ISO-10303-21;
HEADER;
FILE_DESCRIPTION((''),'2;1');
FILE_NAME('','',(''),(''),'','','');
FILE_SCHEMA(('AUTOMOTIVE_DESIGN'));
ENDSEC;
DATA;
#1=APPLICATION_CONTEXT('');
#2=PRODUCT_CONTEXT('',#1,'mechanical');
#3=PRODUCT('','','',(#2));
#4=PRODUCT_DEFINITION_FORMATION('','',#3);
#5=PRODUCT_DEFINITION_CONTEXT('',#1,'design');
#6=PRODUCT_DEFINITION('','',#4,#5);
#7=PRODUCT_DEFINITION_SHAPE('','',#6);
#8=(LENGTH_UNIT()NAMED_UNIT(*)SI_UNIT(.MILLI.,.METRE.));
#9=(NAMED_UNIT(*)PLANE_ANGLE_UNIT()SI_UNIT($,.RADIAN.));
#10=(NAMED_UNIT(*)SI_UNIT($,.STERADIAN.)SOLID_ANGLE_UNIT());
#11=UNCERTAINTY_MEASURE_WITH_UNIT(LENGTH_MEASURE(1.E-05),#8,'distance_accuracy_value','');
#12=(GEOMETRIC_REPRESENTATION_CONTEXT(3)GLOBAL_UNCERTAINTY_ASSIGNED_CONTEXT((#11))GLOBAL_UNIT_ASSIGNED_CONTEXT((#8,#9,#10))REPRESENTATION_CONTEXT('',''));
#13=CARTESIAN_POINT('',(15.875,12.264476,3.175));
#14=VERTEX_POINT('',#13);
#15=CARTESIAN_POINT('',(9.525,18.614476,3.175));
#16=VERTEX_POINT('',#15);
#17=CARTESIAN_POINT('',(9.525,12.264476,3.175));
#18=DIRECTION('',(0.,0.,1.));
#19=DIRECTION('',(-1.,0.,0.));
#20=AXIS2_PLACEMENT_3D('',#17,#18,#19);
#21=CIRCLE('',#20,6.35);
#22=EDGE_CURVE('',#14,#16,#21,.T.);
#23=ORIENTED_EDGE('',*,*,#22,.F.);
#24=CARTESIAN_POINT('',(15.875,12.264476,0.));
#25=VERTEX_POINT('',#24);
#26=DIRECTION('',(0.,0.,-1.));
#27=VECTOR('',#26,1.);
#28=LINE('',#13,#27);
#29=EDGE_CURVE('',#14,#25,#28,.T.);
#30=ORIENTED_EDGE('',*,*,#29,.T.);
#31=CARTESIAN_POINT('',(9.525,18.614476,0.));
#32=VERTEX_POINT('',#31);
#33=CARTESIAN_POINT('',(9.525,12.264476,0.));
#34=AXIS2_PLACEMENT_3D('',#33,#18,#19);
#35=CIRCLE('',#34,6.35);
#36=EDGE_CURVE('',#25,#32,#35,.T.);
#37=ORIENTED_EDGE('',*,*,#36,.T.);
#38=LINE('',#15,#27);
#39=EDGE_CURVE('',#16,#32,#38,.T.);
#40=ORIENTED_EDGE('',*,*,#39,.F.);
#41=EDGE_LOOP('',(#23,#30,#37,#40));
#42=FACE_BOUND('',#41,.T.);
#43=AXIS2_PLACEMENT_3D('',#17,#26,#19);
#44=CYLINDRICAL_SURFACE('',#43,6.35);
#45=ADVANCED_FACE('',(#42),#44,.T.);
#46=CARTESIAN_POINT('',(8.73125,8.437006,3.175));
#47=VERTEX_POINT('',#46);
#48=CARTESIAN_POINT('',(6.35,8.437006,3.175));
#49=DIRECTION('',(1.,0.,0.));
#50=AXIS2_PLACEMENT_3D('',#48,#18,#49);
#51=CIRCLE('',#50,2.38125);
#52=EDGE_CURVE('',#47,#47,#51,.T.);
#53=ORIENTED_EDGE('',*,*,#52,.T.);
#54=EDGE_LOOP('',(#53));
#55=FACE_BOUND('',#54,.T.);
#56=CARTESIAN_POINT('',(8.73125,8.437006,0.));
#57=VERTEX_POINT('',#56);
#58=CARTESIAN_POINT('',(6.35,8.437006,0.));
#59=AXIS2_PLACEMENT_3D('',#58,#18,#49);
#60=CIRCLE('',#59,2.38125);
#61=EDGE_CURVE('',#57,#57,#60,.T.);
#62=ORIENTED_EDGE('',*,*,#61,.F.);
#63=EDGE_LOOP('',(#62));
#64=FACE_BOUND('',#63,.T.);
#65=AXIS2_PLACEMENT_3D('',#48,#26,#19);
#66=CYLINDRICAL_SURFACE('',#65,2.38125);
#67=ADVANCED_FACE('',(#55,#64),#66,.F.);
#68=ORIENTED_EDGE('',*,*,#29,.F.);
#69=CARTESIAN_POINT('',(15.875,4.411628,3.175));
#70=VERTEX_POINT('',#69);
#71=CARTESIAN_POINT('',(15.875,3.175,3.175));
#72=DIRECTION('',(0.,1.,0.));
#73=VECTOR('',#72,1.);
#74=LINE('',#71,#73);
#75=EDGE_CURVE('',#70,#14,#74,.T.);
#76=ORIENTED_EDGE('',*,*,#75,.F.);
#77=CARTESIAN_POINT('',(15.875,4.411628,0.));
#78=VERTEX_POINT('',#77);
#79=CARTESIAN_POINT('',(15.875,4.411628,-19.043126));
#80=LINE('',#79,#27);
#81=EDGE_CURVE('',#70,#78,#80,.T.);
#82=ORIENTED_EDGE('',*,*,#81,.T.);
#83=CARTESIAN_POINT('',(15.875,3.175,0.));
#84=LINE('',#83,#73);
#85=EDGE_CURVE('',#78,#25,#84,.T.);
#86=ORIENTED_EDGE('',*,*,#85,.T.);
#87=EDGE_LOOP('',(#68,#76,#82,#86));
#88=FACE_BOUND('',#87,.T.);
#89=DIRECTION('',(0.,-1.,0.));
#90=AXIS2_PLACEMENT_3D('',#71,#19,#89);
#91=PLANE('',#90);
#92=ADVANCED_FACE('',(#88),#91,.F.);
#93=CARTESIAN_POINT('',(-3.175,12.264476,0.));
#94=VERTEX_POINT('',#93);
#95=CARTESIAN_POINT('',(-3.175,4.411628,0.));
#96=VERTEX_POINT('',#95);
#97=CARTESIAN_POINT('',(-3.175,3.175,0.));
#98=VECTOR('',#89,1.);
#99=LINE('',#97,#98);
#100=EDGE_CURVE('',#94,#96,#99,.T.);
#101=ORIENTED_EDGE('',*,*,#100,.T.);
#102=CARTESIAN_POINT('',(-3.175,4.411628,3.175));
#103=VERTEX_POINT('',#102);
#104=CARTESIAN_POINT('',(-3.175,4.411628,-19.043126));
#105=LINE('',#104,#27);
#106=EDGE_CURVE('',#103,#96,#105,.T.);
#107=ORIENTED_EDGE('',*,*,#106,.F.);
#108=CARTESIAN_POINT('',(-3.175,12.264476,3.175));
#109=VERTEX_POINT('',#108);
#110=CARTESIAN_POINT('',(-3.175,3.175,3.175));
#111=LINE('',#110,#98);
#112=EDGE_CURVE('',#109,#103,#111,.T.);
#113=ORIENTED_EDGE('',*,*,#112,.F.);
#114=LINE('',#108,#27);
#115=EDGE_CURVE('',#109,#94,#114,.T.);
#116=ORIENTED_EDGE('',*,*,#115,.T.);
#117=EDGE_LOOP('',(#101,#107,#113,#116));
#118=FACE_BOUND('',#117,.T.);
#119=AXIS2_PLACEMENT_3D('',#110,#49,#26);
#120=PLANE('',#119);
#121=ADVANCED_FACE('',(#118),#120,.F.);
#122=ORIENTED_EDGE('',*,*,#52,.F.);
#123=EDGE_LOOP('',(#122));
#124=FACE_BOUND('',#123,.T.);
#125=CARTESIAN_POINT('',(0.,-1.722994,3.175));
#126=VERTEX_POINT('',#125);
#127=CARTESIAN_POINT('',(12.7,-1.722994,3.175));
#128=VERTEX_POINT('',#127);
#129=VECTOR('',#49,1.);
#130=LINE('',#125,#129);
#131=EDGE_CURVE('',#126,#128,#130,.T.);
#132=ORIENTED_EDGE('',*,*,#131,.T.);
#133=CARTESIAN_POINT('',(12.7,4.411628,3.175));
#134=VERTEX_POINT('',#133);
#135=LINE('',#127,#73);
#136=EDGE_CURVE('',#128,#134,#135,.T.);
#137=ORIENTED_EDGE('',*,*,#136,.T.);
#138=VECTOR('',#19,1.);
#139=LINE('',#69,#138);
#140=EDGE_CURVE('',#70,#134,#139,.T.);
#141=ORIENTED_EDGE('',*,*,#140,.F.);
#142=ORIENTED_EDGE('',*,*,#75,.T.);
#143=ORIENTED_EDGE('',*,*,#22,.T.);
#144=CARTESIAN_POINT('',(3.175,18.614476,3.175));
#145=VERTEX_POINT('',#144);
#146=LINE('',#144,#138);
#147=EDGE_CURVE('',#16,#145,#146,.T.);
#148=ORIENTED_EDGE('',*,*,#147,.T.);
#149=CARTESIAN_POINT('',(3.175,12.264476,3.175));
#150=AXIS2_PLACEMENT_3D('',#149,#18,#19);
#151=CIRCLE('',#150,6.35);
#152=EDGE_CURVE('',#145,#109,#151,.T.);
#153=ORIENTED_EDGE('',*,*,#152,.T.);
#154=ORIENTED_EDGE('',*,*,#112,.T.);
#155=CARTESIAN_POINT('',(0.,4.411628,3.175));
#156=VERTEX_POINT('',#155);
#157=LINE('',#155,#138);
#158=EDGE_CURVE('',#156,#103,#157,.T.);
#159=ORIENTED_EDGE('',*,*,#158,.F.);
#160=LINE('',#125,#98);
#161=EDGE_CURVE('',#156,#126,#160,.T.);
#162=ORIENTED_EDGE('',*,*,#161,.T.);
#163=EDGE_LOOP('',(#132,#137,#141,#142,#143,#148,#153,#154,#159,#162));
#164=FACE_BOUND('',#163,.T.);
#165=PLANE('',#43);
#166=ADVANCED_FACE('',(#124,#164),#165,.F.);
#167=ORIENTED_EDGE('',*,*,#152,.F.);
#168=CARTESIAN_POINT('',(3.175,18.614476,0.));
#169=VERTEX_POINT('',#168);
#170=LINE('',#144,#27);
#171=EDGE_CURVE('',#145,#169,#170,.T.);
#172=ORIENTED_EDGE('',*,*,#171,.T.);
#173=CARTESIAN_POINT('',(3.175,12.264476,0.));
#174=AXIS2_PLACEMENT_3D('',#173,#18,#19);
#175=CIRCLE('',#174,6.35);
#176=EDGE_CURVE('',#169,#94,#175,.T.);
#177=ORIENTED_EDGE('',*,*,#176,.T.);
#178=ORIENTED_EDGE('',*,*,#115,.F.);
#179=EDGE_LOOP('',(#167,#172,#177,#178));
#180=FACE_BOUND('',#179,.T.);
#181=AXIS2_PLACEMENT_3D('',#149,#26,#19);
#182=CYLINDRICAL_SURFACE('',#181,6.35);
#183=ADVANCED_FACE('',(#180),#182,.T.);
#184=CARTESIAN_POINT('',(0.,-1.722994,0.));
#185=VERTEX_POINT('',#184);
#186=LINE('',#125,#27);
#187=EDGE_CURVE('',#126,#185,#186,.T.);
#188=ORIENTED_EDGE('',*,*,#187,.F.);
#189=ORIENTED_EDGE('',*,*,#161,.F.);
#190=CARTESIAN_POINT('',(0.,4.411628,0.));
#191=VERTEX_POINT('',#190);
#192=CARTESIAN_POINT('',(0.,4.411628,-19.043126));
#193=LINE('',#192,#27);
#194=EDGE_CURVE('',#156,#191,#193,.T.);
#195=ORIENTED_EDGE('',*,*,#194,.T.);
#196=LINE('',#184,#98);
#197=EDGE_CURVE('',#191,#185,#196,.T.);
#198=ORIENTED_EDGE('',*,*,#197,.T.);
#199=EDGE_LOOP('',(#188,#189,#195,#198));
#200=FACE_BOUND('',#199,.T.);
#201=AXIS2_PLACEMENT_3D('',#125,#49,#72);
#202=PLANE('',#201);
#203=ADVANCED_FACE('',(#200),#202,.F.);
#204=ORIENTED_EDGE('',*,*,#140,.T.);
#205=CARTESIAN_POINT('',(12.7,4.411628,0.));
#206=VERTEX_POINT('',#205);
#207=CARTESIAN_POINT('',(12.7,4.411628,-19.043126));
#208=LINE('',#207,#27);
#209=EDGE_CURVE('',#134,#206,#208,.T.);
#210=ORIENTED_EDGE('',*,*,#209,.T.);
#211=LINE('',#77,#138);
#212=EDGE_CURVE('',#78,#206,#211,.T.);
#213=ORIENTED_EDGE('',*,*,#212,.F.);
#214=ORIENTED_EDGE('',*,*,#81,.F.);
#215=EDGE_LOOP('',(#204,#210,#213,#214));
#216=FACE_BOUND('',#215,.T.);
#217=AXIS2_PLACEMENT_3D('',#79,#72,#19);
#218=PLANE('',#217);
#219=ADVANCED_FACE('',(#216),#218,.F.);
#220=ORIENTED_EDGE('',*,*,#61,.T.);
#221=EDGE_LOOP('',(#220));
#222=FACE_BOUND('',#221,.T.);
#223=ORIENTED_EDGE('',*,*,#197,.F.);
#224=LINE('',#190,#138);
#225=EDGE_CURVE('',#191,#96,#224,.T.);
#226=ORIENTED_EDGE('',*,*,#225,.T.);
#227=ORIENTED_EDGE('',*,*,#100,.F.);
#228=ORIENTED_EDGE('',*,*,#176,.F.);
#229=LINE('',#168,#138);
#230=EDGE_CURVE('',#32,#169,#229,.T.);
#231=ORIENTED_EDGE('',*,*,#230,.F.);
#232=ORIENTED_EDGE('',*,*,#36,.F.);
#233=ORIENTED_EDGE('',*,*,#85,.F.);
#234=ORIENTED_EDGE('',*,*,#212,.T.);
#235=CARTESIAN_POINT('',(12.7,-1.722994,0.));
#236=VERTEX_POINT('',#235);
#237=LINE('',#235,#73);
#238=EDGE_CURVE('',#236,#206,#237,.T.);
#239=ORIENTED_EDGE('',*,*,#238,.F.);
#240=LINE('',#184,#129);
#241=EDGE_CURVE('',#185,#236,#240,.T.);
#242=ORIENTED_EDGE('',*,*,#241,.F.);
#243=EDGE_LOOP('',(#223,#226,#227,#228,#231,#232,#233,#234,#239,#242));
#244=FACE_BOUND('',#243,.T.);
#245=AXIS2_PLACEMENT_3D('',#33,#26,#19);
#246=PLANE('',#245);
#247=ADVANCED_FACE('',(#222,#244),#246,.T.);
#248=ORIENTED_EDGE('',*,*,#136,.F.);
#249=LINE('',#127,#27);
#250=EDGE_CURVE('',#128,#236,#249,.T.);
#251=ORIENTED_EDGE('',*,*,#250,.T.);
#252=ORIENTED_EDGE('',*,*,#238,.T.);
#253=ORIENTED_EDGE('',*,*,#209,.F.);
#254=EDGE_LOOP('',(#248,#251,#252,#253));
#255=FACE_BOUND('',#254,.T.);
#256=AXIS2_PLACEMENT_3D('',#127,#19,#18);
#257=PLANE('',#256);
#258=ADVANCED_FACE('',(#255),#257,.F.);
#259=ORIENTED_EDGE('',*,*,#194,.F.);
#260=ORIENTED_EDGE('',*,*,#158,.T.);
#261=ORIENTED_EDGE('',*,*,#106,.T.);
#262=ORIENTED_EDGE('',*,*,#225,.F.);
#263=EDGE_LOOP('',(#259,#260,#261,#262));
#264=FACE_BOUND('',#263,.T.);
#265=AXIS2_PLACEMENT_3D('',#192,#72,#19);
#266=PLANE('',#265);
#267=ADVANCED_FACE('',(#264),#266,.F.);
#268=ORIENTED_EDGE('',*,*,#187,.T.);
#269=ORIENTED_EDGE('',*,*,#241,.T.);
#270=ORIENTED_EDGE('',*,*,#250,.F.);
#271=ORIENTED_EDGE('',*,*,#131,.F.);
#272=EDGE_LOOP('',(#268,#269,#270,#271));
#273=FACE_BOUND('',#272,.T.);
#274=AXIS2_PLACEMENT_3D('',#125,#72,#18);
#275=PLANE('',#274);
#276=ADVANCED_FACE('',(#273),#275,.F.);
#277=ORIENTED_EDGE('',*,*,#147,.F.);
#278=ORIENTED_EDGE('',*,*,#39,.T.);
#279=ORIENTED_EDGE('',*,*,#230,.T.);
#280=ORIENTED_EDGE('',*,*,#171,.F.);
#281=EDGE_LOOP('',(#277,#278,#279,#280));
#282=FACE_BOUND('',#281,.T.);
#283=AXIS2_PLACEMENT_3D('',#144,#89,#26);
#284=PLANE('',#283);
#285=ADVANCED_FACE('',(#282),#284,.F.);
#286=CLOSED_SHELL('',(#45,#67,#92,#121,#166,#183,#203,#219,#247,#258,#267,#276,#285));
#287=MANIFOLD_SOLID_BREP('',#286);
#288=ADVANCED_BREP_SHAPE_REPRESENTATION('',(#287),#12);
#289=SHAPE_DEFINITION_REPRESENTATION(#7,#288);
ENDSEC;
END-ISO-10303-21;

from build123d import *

# Parameters (mm, degrees)
SKETCH1_R           = 2.38125
BOSS_EXTRUDE1_DEPTH = 3.175
CAVITY1_START       = -3.175
CAVITY1_OUTLINE_W   = 1.236627981
CAVITY1_OUTLINE_H   = 3.175
CAVITY1_DEPTH       = 3.175
CAVITY1_START_2     = 12.7
CAVITY1_2_OUTLINE_W = 1.236627981
CAVITY1_2_OUTLINE_H = 3.175
CAVITY1_2_DEPTH     = 3.175


# Read off the part's stored shape, not the designer's step: Cavity1
with BuildPart() as part:
    # Sketch1 → Boss-Extrude1 (new body)
    with BuildSketch(Plane.XY):
        with BuildLine():
            Line((0, -1.722993842), (12.7, -1.722993842))
            Line((12.7, -1.722993842), (12.7, 3.175))
            Line((12.7, 3.175), (15.875, 3.175))
            Line((15.875, 3.175), (15.875, 12.264476338))
            ThreePointArc((15.875, 12.264476338), (14.015128061, 16.754604399), (9.525, 18.614476338))
            Line((9.525, 18.614476338), (3.175, 18.614476338))
            ThreePointArc((3.175, 18.614476338), (-1.315128061, 16.754604399), (-3.175, 12.264476338))
            Line((-3.175, 12.264476338), (-3.175, 3.175))
            Line((-3.175, 3.175), (0, 3.175))
            Line((0, 3.175), (0, -1.722993842))
        make_face()
        with Locations((6.35, 8.437006158)):
            Circle(SKETCH1_R, mode=Mode.SUBTRACT)
    extrude(amount=BOSS_EXTRUDE1_DEPTH)

    # Cavity1 outline → Cavity1 (cut)
    with BuildSketch(Plane.YZ.offset(CAVITY1_START)):
        with Locations((3.793313991, 1.5875)):
            Rectangle(CAVITY1_OUTLINE_W, CAVITY1_OUTLINE_H)
    extrude(amount=CAVITY1_DEPTH, mode=Mode.SUBTRACT)

    # Cavity1 2 outline → Cavity1 2 (cut)
    with BuildSketch(Plane.YZ.offset(CAVITY1_START_2)):
        with Locations((3.793313991, 1.5875)):
            Rectangle(CAVITY1_2_OUTLINE_W, CAVITY1_2_OUTLINE_H)
    extrude(amount=CAVITY1_2_DEPTH, mode=Mode.SUBTRACT)


solid = part.part
